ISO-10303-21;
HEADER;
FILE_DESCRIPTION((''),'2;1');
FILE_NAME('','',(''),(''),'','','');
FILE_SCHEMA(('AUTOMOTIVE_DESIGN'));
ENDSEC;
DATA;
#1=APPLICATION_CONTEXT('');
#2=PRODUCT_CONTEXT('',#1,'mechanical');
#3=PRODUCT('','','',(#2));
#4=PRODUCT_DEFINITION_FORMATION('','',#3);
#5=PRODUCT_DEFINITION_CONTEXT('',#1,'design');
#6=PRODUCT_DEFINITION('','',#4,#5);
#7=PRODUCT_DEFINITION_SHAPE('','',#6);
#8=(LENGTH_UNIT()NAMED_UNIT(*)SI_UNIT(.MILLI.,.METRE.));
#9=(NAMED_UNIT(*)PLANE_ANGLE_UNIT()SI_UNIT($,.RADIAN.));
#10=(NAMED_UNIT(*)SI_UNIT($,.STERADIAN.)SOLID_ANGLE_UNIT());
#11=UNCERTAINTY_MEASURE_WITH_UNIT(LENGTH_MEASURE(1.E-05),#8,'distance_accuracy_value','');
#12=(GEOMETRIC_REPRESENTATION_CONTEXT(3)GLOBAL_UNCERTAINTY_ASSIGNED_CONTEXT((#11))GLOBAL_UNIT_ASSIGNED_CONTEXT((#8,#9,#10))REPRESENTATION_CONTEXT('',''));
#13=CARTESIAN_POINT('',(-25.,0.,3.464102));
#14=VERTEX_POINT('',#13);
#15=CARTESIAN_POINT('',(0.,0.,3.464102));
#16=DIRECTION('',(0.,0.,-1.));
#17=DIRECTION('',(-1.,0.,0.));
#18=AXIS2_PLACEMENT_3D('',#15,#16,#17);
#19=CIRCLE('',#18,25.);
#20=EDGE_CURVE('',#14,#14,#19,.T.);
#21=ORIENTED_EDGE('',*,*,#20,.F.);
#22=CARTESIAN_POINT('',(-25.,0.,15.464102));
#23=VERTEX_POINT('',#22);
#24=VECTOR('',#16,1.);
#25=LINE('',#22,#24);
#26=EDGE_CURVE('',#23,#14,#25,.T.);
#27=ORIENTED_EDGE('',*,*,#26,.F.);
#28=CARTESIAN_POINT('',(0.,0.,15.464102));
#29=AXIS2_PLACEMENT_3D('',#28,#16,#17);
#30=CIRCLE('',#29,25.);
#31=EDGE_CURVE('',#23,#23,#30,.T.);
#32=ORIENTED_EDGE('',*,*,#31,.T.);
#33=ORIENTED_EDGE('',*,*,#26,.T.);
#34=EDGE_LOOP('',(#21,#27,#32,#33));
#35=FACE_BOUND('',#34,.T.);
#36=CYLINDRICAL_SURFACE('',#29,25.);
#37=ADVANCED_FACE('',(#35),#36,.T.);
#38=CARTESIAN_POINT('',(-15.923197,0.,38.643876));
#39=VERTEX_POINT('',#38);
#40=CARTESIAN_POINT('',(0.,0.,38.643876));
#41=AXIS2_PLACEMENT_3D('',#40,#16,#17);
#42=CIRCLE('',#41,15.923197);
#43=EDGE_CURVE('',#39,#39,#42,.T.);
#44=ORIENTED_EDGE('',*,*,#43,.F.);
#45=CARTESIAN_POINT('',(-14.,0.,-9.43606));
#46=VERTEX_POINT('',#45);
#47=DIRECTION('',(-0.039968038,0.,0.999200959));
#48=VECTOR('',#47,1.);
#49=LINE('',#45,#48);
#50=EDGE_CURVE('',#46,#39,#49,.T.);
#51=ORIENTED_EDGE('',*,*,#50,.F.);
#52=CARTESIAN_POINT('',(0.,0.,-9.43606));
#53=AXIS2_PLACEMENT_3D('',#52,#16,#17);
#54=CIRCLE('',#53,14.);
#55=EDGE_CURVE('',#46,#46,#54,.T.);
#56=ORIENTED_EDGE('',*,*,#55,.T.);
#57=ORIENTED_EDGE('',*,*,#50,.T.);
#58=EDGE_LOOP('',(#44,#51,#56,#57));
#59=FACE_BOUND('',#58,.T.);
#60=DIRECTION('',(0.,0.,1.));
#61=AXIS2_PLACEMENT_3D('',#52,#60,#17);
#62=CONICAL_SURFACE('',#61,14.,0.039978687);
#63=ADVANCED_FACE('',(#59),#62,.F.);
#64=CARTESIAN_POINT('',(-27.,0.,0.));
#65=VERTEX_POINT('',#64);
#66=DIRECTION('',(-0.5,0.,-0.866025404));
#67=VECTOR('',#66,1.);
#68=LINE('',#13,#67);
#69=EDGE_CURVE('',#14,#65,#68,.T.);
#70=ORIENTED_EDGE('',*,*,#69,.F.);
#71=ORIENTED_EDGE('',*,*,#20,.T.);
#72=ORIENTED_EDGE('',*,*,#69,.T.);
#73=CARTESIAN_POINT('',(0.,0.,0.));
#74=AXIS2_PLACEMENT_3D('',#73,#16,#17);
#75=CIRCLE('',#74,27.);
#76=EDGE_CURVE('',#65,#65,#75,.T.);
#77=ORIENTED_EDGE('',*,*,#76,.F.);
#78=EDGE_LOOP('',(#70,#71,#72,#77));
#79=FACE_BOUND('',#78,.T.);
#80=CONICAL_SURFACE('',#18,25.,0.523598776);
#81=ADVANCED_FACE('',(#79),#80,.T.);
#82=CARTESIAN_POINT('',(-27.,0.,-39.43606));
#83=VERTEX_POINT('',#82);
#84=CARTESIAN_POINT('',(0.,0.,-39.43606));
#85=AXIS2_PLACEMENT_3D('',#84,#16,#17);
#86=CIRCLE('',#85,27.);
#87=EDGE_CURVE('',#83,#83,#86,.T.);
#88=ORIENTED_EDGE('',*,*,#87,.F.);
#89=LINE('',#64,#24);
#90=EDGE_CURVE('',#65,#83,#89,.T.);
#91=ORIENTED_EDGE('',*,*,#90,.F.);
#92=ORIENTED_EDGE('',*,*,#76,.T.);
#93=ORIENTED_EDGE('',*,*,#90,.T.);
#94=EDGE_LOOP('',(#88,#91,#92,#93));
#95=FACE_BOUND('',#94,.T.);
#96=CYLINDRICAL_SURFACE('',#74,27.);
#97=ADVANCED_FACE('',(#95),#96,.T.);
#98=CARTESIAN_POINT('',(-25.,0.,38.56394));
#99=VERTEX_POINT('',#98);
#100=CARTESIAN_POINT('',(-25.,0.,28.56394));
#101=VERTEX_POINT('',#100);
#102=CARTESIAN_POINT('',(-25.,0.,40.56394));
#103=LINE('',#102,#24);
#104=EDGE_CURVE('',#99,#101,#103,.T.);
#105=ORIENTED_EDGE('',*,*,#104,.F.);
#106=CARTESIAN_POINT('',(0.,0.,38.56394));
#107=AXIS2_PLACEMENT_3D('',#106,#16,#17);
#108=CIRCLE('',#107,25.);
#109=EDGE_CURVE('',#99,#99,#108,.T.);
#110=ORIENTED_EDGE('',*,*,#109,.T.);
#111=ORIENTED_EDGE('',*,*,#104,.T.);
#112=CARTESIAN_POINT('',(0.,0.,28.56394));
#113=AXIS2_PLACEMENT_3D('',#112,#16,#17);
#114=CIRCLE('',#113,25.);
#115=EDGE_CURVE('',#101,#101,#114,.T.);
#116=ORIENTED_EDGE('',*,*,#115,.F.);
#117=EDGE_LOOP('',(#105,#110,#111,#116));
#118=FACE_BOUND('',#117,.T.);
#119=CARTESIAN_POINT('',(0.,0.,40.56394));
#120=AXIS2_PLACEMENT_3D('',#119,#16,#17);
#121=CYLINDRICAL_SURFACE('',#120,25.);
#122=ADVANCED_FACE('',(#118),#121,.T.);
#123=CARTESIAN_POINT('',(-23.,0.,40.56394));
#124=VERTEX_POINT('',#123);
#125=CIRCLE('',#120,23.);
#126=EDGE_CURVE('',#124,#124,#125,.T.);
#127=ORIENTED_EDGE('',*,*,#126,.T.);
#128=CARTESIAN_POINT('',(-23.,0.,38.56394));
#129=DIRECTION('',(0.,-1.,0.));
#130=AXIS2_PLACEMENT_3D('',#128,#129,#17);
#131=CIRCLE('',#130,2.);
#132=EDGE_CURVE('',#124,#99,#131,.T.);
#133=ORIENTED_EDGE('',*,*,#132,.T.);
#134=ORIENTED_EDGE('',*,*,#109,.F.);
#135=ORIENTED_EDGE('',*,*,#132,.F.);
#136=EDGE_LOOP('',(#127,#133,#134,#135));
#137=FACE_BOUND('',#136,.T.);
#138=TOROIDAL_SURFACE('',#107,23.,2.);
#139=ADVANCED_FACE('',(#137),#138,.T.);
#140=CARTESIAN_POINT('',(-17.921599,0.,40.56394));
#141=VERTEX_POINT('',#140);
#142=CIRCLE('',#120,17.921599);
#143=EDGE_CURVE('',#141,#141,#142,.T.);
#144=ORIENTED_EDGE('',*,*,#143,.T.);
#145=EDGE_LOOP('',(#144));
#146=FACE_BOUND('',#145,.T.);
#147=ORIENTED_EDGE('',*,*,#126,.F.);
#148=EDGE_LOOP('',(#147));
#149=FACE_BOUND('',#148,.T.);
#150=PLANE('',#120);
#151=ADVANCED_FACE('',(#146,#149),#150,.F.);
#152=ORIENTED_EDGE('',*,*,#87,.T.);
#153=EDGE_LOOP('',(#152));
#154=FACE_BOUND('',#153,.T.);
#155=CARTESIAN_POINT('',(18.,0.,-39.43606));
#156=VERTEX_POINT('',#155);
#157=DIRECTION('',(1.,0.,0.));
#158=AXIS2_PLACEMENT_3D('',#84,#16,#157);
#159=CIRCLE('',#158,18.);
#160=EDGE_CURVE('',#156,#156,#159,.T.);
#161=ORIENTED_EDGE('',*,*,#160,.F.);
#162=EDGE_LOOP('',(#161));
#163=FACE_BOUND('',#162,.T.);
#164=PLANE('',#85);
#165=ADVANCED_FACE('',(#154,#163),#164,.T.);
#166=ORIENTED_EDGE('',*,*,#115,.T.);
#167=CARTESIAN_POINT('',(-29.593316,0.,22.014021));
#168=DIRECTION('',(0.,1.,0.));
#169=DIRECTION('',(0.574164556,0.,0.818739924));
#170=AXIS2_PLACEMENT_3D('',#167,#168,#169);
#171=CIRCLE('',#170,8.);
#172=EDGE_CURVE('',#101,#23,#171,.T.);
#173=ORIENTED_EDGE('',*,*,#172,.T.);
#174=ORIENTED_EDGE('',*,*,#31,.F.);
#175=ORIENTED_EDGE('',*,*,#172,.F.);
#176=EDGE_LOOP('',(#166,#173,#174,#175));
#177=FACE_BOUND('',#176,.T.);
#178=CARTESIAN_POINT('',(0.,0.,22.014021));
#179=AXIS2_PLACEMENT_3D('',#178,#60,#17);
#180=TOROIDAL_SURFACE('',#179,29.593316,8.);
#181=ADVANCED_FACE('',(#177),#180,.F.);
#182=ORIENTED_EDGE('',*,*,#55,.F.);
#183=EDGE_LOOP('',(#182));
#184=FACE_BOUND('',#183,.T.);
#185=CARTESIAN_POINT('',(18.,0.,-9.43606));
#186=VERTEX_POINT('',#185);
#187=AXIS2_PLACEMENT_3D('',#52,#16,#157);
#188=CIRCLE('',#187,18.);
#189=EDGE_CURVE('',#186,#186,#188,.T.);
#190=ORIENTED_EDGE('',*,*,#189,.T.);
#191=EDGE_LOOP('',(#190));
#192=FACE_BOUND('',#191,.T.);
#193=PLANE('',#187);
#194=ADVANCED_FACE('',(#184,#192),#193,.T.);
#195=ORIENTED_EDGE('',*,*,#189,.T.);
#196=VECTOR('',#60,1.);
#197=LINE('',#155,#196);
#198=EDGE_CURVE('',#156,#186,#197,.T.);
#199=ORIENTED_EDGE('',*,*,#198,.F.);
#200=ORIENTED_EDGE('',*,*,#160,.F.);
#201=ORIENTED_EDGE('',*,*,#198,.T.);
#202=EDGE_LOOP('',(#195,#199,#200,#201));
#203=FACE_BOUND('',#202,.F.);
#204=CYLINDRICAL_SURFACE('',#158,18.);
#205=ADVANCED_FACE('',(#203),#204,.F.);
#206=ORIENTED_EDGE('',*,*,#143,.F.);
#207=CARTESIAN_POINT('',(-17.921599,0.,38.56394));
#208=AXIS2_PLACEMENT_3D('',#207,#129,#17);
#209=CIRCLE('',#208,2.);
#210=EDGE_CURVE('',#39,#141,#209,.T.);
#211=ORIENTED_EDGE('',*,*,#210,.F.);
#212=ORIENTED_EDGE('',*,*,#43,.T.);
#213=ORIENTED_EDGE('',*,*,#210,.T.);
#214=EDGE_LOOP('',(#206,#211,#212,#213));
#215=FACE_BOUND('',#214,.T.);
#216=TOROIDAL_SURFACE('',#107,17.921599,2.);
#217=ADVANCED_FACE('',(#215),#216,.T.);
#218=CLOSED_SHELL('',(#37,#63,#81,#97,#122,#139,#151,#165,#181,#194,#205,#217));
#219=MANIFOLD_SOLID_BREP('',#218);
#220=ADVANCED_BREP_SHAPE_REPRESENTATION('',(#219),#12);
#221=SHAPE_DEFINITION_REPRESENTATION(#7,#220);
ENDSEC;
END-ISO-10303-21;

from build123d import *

# Parameters (mm, degrees)
F2_R     = 2
F3_R     = 18
F3_R_2   = 14
F4_DEPTH = 30


# Not quite as in the source:
# - a feature names something its author has since deleted; it is built from what else it names


with BuildPart() as f1:
    # F0 (on Front) → F1 (revolve)
    with BuildSketch(Plane.XZ):
        with BuildLine():
            Line((-14, -9.4360596032), (-16, 40.5639403968))
            Line((-16, 40.5639403968), (-25, 40.5639403968))
            Line((-25, 40.5639403968), (-25, 28.5639403968))
            ThreePointArc((-25, 28.5639403968), (-21.593316446, 22.014021006), (-25, 15.4641016151))
            Line((-25, 15.4641016151), (-25, 3.4641016151))
            Line((-25, 3.4641016151), (-27, 0))
            Line((-27, 0), (-27, -39.4360596032))
            Line((-27, -39.4360596032), (-18, -39.4360596032))
            Line((-18, -39.4360596032), (-14, -39.4360596032))
            Line((-14, -39.4360596032), (-14, -9.4360596032))
        make_face()
    revolve(axis=Axis((0, 0, -1.7232764512), (0, 0, -1)))

    # F2
    f2_edges = [f1.edges().sort_by_distance(p)[0] for p in [
        (16, 0, 40.56394),
        (25, 0, 40.56394),
    ]]
    fillet(f2_edges, radius=F2_R)

    # F3 (on face) → F4 (cut)
    with BuildSketch(Plane(origin=(0, 0, -39.4360596032), x_dir=(1, 0, 0), z_dir=(0, 0, -1))):
        Circle(F3_R)
        Circle(F3_R_2, mode=Mode.SUBTRACT)
    extrude(amount=-F4_DEPTH, mode=Mode.SUBTRACT)


solid = f1.part
